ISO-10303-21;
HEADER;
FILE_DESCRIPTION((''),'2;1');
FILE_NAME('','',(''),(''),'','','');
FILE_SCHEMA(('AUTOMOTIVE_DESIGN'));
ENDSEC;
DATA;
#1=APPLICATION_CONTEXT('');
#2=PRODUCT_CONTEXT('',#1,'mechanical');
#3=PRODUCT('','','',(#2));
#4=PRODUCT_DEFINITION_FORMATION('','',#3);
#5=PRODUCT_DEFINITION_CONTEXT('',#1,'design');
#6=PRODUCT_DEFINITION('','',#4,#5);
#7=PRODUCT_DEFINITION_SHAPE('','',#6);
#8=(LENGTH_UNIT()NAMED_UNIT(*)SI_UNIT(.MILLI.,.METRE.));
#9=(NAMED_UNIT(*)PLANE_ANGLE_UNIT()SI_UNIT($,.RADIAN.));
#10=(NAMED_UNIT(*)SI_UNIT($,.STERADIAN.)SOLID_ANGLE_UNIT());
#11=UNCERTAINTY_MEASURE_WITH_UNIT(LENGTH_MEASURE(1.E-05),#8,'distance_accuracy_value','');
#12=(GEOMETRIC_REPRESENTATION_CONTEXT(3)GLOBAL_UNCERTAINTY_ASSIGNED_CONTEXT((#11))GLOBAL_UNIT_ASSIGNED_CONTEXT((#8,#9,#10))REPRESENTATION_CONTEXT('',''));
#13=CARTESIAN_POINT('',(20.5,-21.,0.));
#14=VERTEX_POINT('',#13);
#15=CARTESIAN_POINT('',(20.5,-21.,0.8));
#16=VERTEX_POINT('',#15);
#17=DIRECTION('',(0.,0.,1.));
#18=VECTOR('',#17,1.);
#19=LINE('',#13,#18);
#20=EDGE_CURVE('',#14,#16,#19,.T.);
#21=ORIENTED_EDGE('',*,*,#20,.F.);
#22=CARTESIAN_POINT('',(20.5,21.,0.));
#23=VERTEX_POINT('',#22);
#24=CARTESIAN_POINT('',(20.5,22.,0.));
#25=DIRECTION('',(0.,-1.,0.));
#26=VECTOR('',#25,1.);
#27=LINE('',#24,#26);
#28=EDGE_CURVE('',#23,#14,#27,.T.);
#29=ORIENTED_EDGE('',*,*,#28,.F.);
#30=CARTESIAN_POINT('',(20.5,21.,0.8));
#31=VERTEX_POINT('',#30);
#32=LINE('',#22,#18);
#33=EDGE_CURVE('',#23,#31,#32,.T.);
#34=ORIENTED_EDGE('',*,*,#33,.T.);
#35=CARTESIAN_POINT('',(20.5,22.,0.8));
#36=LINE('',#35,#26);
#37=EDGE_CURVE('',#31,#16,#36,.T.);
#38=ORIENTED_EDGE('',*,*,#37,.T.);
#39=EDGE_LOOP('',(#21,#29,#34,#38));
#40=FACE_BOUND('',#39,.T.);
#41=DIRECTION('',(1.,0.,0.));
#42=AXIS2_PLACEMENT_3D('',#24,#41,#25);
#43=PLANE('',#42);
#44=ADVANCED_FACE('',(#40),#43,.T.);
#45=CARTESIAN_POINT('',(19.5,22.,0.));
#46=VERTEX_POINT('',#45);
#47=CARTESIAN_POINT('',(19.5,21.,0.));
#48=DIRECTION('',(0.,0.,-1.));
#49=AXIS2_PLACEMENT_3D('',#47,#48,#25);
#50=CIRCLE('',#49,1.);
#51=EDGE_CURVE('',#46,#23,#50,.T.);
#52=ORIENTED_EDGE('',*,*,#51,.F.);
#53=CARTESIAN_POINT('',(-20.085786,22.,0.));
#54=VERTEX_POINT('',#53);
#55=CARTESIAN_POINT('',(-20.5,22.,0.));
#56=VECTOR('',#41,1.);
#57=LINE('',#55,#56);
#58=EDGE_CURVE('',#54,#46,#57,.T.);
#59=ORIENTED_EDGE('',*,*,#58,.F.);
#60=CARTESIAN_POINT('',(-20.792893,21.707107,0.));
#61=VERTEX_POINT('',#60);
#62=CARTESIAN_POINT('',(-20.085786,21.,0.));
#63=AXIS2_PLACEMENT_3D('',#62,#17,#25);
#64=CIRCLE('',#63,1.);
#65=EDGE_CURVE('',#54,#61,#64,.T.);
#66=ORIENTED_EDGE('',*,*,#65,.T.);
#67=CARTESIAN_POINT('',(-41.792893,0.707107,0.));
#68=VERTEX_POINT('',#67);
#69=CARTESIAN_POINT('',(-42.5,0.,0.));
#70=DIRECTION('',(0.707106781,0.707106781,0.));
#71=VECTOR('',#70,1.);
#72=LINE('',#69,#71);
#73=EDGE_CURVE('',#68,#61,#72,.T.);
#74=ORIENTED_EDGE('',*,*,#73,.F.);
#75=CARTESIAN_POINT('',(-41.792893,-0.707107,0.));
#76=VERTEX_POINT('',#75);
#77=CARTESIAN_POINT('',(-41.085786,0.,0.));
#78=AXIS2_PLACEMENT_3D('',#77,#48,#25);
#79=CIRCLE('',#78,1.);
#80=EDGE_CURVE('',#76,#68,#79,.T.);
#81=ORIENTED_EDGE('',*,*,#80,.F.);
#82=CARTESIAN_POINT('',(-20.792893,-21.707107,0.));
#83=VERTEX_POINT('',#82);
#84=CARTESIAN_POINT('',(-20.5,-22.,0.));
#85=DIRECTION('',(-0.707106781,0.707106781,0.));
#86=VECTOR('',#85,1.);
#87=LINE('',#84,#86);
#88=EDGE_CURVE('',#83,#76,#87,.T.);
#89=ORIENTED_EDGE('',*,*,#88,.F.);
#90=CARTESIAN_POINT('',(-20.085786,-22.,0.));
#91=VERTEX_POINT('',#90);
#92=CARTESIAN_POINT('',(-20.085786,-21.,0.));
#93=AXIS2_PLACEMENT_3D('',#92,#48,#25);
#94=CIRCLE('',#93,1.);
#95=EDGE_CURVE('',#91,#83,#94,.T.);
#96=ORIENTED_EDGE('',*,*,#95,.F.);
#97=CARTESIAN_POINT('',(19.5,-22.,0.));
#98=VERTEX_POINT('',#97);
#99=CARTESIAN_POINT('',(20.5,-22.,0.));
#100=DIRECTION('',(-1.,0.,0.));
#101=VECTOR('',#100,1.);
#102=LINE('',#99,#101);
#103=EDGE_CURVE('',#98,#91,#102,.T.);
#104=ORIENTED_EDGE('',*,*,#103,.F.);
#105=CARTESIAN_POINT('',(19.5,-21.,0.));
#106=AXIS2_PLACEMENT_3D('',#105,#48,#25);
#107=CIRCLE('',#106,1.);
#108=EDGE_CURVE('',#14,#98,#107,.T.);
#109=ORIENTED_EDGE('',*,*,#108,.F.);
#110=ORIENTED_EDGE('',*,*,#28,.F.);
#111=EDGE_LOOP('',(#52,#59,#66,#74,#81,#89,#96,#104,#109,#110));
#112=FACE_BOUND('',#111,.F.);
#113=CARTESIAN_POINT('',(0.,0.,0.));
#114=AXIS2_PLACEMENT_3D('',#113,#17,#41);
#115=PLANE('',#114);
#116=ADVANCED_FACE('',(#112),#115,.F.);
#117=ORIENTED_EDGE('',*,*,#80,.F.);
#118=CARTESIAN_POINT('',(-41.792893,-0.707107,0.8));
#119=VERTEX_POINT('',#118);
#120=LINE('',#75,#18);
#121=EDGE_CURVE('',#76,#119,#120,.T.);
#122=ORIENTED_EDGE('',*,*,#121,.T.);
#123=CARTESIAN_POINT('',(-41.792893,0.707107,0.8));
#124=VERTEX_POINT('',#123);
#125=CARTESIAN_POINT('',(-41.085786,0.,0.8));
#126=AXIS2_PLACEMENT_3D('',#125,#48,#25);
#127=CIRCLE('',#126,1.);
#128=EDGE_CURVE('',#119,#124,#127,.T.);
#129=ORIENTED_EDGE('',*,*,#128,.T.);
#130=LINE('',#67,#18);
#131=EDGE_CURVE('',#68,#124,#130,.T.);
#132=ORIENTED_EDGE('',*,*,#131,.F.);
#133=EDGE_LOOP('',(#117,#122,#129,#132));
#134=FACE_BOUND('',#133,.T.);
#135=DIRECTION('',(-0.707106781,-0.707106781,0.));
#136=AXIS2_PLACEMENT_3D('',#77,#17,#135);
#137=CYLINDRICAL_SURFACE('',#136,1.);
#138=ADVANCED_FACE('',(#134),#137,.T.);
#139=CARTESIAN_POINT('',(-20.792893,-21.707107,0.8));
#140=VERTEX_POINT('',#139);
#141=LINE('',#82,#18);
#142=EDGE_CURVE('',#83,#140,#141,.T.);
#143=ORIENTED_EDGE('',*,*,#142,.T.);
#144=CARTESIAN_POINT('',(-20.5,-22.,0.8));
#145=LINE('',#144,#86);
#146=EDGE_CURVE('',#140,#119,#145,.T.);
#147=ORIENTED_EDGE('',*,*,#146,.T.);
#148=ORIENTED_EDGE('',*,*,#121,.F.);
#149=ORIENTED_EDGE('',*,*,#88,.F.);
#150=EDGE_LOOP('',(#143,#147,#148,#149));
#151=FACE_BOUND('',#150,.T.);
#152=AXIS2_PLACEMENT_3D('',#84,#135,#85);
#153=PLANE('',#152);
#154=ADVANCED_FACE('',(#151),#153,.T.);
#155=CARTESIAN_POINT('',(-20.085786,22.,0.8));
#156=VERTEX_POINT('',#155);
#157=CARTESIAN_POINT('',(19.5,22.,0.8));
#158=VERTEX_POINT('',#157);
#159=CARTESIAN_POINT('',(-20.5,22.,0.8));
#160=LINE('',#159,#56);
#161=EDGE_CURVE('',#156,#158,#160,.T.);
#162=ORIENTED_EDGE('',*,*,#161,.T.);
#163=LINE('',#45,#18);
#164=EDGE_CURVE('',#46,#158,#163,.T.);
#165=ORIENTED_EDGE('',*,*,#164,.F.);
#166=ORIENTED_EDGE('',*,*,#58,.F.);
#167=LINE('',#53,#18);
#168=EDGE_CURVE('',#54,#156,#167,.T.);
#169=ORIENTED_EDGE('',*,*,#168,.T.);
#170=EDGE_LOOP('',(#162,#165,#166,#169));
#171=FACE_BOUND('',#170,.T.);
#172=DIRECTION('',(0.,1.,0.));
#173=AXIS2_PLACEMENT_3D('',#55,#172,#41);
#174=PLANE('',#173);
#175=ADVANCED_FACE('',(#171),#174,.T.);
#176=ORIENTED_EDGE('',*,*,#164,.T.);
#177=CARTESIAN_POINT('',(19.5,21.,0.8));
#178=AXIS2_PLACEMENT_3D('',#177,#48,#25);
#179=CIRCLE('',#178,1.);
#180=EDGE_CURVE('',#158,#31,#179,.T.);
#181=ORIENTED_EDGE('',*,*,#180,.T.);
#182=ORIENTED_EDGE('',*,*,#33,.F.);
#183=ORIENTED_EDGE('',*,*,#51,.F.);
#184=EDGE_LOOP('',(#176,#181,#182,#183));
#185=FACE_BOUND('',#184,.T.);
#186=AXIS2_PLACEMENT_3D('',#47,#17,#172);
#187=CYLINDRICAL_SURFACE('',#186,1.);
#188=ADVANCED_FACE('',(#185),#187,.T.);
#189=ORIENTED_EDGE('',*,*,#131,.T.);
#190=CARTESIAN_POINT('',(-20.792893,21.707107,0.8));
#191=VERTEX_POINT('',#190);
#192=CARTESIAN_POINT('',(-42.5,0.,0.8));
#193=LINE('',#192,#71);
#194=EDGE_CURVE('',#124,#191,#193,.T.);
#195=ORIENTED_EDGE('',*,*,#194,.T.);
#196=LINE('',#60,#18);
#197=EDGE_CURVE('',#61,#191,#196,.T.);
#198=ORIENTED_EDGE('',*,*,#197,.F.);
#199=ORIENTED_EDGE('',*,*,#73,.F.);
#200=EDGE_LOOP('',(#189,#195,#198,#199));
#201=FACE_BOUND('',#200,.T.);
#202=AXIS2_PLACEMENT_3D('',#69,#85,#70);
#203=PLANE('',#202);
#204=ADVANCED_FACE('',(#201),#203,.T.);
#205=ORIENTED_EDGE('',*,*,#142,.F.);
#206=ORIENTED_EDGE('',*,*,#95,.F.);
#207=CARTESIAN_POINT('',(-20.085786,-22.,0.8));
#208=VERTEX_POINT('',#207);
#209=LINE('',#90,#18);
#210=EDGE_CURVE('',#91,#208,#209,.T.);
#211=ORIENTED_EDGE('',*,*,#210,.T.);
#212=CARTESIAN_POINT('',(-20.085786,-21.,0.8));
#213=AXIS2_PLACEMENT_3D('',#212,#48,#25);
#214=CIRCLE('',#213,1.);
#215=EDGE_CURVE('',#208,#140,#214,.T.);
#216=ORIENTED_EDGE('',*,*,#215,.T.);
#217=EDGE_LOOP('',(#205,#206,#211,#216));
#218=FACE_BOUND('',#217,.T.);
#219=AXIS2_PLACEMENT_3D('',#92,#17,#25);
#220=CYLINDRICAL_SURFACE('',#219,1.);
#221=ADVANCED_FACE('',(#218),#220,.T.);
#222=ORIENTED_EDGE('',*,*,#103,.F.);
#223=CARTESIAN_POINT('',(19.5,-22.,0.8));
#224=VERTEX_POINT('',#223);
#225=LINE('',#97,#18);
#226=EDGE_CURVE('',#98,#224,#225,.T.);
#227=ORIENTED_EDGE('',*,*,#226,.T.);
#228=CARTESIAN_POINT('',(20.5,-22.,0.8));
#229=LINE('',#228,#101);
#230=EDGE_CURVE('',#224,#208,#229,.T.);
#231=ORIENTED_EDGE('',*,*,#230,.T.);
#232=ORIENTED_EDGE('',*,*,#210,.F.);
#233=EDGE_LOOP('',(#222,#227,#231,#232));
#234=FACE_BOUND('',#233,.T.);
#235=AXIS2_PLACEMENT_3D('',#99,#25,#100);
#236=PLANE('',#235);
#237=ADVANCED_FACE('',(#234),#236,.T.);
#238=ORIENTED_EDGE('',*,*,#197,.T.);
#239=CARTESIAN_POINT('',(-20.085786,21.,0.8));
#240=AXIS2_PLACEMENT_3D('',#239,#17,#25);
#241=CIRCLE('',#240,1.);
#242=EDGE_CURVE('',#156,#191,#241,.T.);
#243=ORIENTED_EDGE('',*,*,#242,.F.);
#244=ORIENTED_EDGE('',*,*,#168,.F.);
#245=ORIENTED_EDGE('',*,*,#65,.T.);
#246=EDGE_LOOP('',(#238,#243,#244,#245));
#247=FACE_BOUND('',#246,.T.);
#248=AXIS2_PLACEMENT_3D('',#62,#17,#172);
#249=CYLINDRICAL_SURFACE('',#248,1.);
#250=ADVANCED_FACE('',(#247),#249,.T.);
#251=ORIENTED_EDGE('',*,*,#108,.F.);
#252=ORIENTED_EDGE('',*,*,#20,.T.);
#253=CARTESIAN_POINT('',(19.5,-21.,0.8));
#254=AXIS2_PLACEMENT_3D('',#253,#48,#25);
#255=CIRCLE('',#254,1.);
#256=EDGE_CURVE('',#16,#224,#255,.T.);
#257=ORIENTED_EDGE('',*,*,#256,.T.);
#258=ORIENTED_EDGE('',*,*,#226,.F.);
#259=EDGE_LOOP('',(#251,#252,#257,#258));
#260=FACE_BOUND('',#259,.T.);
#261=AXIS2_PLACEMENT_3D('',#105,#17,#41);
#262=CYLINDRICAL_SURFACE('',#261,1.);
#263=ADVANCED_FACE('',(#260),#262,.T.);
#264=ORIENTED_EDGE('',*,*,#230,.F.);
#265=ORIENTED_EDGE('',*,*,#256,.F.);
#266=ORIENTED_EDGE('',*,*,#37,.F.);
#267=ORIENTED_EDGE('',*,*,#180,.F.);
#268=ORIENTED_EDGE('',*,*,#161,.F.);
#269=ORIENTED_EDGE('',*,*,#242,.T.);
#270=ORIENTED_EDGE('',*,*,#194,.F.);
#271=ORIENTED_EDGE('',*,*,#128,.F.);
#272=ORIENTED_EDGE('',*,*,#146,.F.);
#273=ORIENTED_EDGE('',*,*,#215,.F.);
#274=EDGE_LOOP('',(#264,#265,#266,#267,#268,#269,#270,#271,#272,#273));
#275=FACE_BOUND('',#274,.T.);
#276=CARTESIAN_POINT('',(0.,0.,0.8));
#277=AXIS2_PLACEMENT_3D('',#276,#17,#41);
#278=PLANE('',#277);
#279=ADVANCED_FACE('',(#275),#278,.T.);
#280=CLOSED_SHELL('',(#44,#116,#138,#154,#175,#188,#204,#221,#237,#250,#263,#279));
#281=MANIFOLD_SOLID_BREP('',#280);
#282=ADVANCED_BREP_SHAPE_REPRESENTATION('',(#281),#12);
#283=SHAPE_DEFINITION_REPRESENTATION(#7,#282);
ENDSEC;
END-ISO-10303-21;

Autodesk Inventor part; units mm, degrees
ref_plane "YZ Plane" through (0, 0, 0) normal (1, 0, 0) x (0, 1, 0)
ref_plane "XZ Plane" through (0, 0, 0) normal (0, 1, 0) x (-1, 0, 0)
ref_plane "XY Plane" through (0, 0, 0) normal (0, 0, 1) x (1, 0, 0)
sketch "Sketch1" plane through (0, 0, 0) normal (0, 0, 1) x (1, 0, 0)
  line L0 (-20.5, 22) -> (20.5, 22)
  line L1 (20.5, 22) -> (20.5, -22)
  line L2 (20.5, -22) -> (-20.5, -22)
  line L3 (-20.5, -22) -> (-20.5, 22) construction
  line L4 (-20.5, 22) -> (20.5, -22) construction
  line L5 (-20.5, -22) -> (-42.5, 0)
  line L6 (-42.5, 0) -> (-20.5, 22)
  point P0 (0, 0)
  point P1 (0, 0)
  point P2 (20.5, 0)
  dimension "d0" = 41
  dimension "d1" = 44
  dimension "d4" = 63
extrude "Plate1" add sketch "Sketch1" along normal blind 0.8
fillet "Corner Round2" radius 1 5 edges at (-20.5, -22, 0.4) (-42.5, 0, 0.4) (-20.5, 22, 0.4) (20.5, -22, 0.4) (20.5, 22, 0.4)
equation "\"d2\" = Thickness"
equation "\"BendReliefWidth\" = Thickness"
equation "\"BendReliefDepth\" = 0.5 * Thickness"
equation "\"CornerReliefSize\" = 4 * Thickness"
equation "\"MinimumRemnant\" = 2 * Thickness"
equation "\"TransitionRadius\" = BendRadius"
equation "\"JacobiRadiusSize\" = BendRadius"
equation "\"GapSize\" = Thickness"
equation "\"Thickness\" = 0.8"
equation "\"BendRadius\" = 2.75"
properties part number "MNT-CDF-604 CAP" material "Stainless Steel"
